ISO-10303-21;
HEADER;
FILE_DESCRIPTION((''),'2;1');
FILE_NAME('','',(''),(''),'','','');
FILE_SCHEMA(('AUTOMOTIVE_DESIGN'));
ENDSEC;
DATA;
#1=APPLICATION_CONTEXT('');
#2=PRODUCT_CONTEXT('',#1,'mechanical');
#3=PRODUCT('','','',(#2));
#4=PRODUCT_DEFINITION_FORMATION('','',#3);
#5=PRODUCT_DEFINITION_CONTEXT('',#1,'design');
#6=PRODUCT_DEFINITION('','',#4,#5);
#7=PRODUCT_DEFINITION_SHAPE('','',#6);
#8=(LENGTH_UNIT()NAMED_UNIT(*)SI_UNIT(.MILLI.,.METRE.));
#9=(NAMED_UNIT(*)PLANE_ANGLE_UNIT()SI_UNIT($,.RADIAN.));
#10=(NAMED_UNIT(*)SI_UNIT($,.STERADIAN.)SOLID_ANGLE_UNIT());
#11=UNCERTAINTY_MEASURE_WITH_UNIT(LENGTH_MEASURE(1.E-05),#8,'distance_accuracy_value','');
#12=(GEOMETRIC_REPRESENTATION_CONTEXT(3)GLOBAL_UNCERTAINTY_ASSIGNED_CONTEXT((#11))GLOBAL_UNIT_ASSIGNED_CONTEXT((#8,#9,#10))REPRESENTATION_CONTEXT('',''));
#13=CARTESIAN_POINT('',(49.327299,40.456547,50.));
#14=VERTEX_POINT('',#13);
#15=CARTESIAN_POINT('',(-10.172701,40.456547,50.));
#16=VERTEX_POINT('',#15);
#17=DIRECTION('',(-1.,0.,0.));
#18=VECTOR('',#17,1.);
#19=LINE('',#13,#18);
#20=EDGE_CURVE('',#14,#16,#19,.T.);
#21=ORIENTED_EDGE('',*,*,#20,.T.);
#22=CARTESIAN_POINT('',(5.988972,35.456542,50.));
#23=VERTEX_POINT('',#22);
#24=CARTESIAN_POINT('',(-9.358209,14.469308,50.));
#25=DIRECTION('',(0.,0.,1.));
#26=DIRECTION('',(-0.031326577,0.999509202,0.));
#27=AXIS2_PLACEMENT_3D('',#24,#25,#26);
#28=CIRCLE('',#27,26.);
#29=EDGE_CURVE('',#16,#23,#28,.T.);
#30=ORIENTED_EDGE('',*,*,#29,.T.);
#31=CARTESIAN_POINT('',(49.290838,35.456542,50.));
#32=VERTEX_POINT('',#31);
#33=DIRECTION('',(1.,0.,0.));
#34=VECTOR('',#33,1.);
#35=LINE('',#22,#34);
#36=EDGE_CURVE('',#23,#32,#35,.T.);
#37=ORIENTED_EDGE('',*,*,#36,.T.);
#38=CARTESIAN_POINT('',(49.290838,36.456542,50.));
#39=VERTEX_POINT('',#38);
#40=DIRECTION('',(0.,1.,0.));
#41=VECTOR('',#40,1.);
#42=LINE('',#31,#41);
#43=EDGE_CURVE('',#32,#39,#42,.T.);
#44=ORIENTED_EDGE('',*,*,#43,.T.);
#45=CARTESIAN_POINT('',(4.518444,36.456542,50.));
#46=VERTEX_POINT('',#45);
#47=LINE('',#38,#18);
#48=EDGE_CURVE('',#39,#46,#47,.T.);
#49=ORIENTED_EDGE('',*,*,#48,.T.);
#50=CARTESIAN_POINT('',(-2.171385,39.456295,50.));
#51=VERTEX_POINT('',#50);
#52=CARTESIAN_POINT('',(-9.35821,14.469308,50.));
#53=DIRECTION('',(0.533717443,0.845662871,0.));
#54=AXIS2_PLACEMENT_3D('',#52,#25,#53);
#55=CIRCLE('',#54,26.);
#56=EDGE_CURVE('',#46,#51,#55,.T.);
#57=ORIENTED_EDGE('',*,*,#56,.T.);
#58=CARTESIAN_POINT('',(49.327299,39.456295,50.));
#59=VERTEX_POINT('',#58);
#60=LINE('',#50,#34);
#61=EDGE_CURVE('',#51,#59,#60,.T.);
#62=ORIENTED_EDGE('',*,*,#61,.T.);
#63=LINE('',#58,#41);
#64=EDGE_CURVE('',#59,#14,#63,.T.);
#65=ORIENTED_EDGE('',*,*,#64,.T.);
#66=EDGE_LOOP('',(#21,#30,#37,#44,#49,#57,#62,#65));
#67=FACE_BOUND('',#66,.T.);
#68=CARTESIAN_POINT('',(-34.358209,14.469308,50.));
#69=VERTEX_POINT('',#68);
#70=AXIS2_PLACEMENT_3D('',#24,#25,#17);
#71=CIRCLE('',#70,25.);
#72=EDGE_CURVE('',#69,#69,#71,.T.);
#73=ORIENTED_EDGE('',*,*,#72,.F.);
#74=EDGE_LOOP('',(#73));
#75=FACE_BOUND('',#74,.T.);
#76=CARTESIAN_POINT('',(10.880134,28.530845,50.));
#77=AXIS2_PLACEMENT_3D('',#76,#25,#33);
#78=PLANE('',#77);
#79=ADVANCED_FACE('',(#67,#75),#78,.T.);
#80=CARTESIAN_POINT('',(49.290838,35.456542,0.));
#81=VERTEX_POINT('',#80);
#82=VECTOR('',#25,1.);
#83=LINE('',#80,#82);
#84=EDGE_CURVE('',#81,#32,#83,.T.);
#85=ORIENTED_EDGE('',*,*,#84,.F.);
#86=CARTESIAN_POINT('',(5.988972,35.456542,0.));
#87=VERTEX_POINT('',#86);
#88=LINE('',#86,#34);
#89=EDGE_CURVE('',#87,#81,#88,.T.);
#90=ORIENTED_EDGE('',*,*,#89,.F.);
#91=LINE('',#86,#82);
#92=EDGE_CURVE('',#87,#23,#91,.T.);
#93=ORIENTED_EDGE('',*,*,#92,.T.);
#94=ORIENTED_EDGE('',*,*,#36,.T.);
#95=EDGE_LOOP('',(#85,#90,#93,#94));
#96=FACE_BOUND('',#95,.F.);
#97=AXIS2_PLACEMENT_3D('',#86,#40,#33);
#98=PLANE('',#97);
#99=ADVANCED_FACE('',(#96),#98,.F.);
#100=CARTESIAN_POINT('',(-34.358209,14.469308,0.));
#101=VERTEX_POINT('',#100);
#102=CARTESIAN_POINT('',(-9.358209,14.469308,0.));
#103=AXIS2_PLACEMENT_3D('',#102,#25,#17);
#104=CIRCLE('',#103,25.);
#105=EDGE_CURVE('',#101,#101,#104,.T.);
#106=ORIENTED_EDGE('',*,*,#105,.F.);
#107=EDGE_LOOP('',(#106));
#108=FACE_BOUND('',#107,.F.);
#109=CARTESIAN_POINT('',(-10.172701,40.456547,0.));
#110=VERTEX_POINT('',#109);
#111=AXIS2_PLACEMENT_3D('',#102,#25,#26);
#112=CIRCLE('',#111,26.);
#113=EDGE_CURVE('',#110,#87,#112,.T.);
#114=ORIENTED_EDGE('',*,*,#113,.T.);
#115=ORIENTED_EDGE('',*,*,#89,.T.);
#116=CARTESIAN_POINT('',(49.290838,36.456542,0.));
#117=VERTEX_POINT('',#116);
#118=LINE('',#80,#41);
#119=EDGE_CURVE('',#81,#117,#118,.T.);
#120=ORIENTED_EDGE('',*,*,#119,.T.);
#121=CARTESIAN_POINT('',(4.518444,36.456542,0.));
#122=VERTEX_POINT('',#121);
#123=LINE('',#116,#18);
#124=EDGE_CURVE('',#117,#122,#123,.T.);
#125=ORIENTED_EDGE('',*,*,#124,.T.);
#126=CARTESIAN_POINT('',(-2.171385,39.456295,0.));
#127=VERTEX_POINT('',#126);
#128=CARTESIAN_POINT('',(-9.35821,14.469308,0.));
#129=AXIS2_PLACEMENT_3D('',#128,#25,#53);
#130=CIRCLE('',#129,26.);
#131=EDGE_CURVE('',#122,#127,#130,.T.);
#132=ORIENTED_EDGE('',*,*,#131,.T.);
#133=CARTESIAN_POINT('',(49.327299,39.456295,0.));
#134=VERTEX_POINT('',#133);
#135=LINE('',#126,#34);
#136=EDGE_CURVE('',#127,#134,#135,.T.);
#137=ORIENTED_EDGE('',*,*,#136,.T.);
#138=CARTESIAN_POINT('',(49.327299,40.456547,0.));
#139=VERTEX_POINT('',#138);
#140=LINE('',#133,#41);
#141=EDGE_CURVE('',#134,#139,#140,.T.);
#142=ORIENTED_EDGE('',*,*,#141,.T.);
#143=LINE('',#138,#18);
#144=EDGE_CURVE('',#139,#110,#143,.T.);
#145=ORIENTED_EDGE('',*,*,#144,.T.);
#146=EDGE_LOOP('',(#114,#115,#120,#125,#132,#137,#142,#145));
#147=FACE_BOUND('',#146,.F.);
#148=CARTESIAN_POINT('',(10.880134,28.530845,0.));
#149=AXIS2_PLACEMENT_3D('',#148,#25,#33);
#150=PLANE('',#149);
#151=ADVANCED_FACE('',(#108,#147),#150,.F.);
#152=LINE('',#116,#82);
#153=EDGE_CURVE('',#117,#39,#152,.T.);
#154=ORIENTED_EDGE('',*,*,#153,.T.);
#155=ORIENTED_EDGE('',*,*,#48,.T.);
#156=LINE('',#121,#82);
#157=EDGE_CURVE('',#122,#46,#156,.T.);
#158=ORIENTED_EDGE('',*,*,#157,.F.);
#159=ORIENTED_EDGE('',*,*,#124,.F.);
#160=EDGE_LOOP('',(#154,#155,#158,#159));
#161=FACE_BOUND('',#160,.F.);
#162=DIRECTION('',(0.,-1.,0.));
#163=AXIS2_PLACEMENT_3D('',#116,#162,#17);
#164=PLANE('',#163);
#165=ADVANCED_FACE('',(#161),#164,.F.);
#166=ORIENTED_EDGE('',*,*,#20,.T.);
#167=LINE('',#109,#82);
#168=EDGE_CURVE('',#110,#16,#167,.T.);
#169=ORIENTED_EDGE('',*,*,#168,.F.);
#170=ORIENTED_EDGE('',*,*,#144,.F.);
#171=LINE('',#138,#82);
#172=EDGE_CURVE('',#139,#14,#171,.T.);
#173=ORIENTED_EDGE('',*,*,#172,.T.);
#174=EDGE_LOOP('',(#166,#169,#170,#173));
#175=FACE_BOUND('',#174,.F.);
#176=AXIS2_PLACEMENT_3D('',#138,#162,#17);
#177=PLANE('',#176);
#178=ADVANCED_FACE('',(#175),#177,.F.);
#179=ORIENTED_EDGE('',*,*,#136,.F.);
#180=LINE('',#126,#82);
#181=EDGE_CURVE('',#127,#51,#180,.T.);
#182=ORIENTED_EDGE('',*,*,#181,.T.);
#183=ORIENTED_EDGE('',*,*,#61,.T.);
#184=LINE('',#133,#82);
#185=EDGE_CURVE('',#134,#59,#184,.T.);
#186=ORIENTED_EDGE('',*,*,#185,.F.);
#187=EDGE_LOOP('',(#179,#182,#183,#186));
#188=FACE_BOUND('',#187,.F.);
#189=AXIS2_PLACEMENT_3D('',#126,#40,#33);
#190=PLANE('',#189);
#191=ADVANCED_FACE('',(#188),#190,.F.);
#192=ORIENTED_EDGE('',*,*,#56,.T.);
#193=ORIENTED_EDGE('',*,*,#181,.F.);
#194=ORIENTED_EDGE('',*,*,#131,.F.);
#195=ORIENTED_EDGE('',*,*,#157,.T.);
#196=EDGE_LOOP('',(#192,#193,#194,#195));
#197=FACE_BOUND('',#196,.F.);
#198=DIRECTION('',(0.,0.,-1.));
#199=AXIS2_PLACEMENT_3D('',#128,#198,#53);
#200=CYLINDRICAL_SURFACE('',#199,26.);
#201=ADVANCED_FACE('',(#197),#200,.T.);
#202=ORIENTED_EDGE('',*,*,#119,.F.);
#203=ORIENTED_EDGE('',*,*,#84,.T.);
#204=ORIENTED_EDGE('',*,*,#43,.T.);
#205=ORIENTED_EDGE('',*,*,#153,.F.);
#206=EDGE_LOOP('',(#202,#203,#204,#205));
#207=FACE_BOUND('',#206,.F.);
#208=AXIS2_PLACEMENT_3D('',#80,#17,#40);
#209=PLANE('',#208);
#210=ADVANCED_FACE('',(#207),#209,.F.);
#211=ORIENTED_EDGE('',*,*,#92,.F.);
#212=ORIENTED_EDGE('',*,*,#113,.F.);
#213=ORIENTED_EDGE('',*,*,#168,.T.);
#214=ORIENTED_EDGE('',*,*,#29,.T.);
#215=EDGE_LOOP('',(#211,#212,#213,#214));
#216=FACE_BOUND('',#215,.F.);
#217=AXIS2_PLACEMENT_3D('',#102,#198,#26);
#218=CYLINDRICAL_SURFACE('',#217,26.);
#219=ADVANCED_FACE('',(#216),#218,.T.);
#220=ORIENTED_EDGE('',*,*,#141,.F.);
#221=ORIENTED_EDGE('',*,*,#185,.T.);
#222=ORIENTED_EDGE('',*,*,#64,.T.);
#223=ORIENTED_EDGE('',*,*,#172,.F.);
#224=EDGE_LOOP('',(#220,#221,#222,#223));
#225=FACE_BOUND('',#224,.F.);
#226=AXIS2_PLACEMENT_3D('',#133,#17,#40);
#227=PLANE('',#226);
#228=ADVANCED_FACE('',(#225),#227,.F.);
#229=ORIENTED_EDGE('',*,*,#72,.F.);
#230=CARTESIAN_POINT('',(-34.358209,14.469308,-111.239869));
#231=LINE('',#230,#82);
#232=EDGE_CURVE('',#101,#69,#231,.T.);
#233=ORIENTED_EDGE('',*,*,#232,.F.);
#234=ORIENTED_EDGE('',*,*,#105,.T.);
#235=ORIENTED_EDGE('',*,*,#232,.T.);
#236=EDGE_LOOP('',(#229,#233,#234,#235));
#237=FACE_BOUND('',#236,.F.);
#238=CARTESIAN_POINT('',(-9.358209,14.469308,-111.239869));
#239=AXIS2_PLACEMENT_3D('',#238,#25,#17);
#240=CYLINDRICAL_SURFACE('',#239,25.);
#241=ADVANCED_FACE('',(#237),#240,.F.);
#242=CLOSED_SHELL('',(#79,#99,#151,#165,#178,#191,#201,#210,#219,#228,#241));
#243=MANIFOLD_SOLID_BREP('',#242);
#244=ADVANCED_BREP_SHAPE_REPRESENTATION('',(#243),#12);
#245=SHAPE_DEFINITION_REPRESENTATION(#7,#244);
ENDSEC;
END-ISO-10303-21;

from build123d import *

# Parameters (mm, degrees)
F1_DEPTH = 50
F3_D     = 50


# Not quite as in the source:
# - the program builds the solid bodies; features that only make, move or delete a surface that nothing else refers to are left out


with BuildPart() as f1:
    # F0 (on Top) → F1 (new body)
    with BuildSketch(Plane.XY):
        with BuildLine():
            Line((49.3272994906, 40.4565469784), (-10.1727005094, 40.4565469784))
            ThreePointArc((-10.1727005094, 40.4565469784), (-17.0425953064, -10.3691748199), (5.9889720653, 35.4565423621))
            Line((5.9889720653, 35.4565423621), (49.2908384362, 35.4565423621))
            Line((49.2908384362, 35.4565423621), (49.2908384362, 36.4565423621))
            Line((49.2908384362, 36.4565423621), (4.5184440125, 36.4565423621))
            ThreePointArc((4.5184440125, 36.4565423621), (1.2797957907, 38.1934060872), (-2.1713849513, 39.4562953896))
            Line((-2.1713849513, 39.4562953896), (49.3272994906, 39.4562953896))
            Line((49.3272994906, 39.4562953896), (49.3272994906, 40.4565469784))
        make_face()
        with BuildLine():
            ThreePointArc((-10.1647124973, 39.4562953896), (8.0319806239, 32.4298558016), (15.6417905006, 14.4693077177))
            ThreePointArc((15.6417905006, 14.4693077177), (-26.7483996228, -3.4912403662), (-10.1647124973, 39.4562953896))
        make_face(mode=Mode.SUBTRACT)
        with BuildLine():
            ThreePointArc((-10.1647124973, 39.4562953896), (-26.7483996228, -3.4912403662), (15.6417905006, 14.4693077177))
            ThreePointArc((15.6417905006, 14.4693077177), (8.0319806239, 32.4298558016), (-10.1647124973, 39.4562953896))
        make_face()
    extrude(amount=F1_DEPTH)

    # F3 (through all)
    with Locations(Plane(origin=(0, 0, 0), x_dir=(1, 0, 0), z_dir=(0, 0, -1))):
        with Locations((-9.3582094994, -14.4693077177)):
            Hole(F3_D / 2)


solid = f1.part
